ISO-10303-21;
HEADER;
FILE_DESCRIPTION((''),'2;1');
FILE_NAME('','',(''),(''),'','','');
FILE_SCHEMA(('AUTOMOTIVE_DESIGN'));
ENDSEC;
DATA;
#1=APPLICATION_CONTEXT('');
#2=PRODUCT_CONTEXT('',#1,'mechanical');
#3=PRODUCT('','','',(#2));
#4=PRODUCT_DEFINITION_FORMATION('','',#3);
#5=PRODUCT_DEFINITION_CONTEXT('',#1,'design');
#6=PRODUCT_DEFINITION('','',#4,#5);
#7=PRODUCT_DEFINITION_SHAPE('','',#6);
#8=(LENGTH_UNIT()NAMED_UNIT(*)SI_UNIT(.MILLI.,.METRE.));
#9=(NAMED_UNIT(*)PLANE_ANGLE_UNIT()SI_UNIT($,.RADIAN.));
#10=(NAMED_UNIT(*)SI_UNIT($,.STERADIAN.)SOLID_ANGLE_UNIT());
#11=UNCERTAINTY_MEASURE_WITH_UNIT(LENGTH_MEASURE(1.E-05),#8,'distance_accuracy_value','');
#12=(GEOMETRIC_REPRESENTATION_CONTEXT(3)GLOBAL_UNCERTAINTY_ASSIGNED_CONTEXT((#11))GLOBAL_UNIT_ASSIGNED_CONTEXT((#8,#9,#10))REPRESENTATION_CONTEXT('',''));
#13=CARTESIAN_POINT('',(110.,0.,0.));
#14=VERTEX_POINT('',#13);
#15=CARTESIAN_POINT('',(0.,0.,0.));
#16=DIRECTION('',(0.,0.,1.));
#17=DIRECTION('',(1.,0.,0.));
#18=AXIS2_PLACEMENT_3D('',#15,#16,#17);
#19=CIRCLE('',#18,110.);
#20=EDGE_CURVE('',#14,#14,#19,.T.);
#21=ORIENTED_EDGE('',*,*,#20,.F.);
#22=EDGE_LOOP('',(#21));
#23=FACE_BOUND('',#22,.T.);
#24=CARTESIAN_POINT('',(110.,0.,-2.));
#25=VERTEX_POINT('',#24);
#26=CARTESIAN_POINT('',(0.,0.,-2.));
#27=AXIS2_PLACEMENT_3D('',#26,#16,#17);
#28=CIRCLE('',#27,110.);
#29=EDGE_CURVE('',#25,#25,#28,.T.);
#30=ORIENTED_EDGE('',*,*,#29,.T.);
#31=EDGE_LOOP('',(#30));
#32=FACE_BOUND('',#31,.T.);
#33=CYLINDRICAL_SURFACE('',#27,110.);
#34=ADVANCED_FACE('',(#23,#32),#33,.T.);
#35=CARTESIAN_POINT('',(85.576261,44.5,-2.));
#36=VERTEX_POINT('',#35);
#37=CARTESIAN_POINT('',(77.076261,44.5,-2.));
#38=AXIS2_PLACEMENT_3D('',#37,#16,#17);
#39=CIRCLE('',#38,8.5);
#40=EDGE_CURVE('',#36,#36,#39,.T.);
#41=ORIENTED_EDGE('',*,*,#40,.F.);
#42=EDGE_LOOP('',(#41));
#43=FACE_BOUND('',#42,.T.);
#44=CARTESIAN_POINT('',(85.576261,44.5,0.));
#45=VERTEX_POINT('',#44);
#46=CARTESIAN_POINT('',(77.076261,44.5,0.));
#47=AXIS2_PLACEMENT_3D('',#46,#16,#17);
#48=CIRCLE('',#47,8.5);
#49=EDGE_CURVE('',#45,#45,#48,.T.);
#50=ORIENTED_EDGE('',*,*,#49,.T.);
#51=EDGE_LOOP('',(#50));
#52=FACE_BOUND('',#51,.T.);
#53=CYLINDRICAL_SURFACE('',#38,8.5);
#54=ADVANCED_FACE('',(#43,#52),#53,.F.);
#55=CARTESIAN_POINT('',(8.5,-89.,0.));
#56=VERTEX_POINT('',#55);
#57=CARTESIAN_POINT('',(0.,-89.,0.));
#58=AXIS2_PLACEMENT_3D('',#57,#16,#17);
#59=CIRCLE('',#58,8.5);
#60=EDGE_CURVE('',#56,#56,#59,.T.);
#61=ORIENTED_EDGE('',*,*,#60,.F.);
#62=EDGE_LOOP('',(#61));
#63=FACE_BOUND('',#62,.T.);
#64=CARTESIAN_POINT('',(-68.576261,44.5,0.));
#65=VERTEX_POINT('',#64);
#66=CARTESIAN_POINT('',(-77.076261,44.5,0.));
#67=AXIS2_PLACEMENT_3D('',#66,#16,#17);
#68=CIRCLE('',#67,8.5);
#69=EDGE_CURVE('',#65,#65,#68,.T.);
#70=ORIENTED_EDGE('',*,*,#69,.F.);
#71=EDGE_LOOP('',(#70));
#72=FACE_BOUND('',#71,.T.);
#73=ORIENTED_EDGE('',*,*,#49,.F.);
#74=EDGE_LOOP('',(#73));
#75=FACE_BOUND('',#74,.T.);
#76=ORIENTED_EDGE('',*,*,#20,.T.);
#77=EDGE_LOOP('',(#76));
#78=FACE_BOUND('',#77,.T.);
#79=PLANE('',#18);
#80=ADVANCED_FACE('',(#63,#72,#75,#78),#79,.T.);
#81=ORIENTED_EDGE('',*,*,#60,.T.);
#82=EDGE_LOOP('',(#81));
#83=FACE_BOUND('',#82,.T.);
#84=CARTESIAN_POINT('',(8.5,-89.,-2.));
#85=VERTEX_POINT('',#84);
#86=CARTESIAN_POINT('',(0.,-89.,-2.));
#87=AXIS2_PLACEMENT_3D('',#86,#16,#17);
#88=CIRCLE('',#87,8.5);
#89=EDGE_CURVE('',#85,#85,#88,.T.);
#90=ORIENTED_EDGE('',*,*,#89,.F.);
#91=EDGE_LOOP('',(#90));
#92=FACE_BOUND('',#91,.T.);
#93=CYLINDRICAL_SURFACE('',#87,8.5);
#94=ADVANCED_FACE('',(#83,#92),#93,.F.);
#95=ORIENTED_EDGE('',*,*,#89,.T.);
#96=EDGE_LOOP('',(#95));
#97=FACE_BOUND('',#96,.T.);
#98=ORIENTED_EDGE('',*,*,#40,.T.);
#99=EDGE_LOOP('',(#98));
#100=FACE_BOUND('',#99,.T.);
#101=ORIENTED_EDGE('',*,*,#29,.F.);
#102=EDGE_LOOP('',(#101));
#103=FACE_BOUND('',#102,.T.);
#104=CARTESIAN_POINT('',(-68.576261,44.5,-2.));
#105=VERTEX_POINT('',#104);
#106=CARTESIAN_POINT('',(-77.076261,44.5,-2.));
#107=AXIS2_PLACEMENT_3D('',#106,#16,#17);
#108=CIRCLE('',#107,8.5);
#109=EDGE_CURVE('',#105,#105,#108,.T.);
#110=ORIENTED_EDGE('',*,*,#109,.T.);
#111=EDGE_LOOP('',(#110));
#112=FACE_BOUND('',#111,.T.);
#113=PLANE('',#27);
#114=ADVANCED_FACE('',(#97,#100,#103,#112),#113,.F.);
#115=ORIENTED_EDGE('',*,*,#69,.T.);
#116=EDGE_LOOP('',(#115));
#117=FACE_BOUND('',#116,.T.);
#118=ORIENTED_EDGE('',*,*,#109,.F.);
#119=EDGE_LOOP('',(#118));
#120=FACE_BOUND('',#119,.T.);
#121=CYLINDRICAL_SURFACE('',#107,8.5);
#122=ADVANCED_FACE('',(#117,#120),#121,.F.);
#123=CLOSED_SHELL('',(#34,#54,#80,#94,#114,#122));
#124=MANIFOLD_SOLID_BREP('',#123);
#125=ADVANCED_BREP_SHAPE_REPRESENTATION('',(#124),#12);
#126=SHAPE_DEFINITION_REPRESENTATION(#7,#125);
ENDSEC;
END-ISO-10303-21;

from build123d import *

# Parameters (mm, degrees)
SKETCH_1_R             = 110
SKETCH_1_R_2           = 8.5
SM_BASE_FLANGE_1_DEPTH = 2


# Sheet-metal steps are written as plain solids
with BuildPart() as part:
    # Sketch 1 → Базовая кромка1 (new body)
    with BuildSketch(Plane.XY):
        Circle(SKETCH_1_R)
        with Locations((77.076260937, 44.5)):
            Circle(SKETCH_1_R_2, mode=Mode.SUBTRACT)
        with Locations((0, -89)):
            Circle(SKETCH_1_R_2, mode=Mode.SUBTRACT)
        with Locations((-77.076260937, 44.5)):
            Circle(SKETCH_1_R_2, mode=Mode.SUBTRACT)
    extrude(amount=-SM_BASE_FLANGE_1_DEPTH)


solid = part.part
